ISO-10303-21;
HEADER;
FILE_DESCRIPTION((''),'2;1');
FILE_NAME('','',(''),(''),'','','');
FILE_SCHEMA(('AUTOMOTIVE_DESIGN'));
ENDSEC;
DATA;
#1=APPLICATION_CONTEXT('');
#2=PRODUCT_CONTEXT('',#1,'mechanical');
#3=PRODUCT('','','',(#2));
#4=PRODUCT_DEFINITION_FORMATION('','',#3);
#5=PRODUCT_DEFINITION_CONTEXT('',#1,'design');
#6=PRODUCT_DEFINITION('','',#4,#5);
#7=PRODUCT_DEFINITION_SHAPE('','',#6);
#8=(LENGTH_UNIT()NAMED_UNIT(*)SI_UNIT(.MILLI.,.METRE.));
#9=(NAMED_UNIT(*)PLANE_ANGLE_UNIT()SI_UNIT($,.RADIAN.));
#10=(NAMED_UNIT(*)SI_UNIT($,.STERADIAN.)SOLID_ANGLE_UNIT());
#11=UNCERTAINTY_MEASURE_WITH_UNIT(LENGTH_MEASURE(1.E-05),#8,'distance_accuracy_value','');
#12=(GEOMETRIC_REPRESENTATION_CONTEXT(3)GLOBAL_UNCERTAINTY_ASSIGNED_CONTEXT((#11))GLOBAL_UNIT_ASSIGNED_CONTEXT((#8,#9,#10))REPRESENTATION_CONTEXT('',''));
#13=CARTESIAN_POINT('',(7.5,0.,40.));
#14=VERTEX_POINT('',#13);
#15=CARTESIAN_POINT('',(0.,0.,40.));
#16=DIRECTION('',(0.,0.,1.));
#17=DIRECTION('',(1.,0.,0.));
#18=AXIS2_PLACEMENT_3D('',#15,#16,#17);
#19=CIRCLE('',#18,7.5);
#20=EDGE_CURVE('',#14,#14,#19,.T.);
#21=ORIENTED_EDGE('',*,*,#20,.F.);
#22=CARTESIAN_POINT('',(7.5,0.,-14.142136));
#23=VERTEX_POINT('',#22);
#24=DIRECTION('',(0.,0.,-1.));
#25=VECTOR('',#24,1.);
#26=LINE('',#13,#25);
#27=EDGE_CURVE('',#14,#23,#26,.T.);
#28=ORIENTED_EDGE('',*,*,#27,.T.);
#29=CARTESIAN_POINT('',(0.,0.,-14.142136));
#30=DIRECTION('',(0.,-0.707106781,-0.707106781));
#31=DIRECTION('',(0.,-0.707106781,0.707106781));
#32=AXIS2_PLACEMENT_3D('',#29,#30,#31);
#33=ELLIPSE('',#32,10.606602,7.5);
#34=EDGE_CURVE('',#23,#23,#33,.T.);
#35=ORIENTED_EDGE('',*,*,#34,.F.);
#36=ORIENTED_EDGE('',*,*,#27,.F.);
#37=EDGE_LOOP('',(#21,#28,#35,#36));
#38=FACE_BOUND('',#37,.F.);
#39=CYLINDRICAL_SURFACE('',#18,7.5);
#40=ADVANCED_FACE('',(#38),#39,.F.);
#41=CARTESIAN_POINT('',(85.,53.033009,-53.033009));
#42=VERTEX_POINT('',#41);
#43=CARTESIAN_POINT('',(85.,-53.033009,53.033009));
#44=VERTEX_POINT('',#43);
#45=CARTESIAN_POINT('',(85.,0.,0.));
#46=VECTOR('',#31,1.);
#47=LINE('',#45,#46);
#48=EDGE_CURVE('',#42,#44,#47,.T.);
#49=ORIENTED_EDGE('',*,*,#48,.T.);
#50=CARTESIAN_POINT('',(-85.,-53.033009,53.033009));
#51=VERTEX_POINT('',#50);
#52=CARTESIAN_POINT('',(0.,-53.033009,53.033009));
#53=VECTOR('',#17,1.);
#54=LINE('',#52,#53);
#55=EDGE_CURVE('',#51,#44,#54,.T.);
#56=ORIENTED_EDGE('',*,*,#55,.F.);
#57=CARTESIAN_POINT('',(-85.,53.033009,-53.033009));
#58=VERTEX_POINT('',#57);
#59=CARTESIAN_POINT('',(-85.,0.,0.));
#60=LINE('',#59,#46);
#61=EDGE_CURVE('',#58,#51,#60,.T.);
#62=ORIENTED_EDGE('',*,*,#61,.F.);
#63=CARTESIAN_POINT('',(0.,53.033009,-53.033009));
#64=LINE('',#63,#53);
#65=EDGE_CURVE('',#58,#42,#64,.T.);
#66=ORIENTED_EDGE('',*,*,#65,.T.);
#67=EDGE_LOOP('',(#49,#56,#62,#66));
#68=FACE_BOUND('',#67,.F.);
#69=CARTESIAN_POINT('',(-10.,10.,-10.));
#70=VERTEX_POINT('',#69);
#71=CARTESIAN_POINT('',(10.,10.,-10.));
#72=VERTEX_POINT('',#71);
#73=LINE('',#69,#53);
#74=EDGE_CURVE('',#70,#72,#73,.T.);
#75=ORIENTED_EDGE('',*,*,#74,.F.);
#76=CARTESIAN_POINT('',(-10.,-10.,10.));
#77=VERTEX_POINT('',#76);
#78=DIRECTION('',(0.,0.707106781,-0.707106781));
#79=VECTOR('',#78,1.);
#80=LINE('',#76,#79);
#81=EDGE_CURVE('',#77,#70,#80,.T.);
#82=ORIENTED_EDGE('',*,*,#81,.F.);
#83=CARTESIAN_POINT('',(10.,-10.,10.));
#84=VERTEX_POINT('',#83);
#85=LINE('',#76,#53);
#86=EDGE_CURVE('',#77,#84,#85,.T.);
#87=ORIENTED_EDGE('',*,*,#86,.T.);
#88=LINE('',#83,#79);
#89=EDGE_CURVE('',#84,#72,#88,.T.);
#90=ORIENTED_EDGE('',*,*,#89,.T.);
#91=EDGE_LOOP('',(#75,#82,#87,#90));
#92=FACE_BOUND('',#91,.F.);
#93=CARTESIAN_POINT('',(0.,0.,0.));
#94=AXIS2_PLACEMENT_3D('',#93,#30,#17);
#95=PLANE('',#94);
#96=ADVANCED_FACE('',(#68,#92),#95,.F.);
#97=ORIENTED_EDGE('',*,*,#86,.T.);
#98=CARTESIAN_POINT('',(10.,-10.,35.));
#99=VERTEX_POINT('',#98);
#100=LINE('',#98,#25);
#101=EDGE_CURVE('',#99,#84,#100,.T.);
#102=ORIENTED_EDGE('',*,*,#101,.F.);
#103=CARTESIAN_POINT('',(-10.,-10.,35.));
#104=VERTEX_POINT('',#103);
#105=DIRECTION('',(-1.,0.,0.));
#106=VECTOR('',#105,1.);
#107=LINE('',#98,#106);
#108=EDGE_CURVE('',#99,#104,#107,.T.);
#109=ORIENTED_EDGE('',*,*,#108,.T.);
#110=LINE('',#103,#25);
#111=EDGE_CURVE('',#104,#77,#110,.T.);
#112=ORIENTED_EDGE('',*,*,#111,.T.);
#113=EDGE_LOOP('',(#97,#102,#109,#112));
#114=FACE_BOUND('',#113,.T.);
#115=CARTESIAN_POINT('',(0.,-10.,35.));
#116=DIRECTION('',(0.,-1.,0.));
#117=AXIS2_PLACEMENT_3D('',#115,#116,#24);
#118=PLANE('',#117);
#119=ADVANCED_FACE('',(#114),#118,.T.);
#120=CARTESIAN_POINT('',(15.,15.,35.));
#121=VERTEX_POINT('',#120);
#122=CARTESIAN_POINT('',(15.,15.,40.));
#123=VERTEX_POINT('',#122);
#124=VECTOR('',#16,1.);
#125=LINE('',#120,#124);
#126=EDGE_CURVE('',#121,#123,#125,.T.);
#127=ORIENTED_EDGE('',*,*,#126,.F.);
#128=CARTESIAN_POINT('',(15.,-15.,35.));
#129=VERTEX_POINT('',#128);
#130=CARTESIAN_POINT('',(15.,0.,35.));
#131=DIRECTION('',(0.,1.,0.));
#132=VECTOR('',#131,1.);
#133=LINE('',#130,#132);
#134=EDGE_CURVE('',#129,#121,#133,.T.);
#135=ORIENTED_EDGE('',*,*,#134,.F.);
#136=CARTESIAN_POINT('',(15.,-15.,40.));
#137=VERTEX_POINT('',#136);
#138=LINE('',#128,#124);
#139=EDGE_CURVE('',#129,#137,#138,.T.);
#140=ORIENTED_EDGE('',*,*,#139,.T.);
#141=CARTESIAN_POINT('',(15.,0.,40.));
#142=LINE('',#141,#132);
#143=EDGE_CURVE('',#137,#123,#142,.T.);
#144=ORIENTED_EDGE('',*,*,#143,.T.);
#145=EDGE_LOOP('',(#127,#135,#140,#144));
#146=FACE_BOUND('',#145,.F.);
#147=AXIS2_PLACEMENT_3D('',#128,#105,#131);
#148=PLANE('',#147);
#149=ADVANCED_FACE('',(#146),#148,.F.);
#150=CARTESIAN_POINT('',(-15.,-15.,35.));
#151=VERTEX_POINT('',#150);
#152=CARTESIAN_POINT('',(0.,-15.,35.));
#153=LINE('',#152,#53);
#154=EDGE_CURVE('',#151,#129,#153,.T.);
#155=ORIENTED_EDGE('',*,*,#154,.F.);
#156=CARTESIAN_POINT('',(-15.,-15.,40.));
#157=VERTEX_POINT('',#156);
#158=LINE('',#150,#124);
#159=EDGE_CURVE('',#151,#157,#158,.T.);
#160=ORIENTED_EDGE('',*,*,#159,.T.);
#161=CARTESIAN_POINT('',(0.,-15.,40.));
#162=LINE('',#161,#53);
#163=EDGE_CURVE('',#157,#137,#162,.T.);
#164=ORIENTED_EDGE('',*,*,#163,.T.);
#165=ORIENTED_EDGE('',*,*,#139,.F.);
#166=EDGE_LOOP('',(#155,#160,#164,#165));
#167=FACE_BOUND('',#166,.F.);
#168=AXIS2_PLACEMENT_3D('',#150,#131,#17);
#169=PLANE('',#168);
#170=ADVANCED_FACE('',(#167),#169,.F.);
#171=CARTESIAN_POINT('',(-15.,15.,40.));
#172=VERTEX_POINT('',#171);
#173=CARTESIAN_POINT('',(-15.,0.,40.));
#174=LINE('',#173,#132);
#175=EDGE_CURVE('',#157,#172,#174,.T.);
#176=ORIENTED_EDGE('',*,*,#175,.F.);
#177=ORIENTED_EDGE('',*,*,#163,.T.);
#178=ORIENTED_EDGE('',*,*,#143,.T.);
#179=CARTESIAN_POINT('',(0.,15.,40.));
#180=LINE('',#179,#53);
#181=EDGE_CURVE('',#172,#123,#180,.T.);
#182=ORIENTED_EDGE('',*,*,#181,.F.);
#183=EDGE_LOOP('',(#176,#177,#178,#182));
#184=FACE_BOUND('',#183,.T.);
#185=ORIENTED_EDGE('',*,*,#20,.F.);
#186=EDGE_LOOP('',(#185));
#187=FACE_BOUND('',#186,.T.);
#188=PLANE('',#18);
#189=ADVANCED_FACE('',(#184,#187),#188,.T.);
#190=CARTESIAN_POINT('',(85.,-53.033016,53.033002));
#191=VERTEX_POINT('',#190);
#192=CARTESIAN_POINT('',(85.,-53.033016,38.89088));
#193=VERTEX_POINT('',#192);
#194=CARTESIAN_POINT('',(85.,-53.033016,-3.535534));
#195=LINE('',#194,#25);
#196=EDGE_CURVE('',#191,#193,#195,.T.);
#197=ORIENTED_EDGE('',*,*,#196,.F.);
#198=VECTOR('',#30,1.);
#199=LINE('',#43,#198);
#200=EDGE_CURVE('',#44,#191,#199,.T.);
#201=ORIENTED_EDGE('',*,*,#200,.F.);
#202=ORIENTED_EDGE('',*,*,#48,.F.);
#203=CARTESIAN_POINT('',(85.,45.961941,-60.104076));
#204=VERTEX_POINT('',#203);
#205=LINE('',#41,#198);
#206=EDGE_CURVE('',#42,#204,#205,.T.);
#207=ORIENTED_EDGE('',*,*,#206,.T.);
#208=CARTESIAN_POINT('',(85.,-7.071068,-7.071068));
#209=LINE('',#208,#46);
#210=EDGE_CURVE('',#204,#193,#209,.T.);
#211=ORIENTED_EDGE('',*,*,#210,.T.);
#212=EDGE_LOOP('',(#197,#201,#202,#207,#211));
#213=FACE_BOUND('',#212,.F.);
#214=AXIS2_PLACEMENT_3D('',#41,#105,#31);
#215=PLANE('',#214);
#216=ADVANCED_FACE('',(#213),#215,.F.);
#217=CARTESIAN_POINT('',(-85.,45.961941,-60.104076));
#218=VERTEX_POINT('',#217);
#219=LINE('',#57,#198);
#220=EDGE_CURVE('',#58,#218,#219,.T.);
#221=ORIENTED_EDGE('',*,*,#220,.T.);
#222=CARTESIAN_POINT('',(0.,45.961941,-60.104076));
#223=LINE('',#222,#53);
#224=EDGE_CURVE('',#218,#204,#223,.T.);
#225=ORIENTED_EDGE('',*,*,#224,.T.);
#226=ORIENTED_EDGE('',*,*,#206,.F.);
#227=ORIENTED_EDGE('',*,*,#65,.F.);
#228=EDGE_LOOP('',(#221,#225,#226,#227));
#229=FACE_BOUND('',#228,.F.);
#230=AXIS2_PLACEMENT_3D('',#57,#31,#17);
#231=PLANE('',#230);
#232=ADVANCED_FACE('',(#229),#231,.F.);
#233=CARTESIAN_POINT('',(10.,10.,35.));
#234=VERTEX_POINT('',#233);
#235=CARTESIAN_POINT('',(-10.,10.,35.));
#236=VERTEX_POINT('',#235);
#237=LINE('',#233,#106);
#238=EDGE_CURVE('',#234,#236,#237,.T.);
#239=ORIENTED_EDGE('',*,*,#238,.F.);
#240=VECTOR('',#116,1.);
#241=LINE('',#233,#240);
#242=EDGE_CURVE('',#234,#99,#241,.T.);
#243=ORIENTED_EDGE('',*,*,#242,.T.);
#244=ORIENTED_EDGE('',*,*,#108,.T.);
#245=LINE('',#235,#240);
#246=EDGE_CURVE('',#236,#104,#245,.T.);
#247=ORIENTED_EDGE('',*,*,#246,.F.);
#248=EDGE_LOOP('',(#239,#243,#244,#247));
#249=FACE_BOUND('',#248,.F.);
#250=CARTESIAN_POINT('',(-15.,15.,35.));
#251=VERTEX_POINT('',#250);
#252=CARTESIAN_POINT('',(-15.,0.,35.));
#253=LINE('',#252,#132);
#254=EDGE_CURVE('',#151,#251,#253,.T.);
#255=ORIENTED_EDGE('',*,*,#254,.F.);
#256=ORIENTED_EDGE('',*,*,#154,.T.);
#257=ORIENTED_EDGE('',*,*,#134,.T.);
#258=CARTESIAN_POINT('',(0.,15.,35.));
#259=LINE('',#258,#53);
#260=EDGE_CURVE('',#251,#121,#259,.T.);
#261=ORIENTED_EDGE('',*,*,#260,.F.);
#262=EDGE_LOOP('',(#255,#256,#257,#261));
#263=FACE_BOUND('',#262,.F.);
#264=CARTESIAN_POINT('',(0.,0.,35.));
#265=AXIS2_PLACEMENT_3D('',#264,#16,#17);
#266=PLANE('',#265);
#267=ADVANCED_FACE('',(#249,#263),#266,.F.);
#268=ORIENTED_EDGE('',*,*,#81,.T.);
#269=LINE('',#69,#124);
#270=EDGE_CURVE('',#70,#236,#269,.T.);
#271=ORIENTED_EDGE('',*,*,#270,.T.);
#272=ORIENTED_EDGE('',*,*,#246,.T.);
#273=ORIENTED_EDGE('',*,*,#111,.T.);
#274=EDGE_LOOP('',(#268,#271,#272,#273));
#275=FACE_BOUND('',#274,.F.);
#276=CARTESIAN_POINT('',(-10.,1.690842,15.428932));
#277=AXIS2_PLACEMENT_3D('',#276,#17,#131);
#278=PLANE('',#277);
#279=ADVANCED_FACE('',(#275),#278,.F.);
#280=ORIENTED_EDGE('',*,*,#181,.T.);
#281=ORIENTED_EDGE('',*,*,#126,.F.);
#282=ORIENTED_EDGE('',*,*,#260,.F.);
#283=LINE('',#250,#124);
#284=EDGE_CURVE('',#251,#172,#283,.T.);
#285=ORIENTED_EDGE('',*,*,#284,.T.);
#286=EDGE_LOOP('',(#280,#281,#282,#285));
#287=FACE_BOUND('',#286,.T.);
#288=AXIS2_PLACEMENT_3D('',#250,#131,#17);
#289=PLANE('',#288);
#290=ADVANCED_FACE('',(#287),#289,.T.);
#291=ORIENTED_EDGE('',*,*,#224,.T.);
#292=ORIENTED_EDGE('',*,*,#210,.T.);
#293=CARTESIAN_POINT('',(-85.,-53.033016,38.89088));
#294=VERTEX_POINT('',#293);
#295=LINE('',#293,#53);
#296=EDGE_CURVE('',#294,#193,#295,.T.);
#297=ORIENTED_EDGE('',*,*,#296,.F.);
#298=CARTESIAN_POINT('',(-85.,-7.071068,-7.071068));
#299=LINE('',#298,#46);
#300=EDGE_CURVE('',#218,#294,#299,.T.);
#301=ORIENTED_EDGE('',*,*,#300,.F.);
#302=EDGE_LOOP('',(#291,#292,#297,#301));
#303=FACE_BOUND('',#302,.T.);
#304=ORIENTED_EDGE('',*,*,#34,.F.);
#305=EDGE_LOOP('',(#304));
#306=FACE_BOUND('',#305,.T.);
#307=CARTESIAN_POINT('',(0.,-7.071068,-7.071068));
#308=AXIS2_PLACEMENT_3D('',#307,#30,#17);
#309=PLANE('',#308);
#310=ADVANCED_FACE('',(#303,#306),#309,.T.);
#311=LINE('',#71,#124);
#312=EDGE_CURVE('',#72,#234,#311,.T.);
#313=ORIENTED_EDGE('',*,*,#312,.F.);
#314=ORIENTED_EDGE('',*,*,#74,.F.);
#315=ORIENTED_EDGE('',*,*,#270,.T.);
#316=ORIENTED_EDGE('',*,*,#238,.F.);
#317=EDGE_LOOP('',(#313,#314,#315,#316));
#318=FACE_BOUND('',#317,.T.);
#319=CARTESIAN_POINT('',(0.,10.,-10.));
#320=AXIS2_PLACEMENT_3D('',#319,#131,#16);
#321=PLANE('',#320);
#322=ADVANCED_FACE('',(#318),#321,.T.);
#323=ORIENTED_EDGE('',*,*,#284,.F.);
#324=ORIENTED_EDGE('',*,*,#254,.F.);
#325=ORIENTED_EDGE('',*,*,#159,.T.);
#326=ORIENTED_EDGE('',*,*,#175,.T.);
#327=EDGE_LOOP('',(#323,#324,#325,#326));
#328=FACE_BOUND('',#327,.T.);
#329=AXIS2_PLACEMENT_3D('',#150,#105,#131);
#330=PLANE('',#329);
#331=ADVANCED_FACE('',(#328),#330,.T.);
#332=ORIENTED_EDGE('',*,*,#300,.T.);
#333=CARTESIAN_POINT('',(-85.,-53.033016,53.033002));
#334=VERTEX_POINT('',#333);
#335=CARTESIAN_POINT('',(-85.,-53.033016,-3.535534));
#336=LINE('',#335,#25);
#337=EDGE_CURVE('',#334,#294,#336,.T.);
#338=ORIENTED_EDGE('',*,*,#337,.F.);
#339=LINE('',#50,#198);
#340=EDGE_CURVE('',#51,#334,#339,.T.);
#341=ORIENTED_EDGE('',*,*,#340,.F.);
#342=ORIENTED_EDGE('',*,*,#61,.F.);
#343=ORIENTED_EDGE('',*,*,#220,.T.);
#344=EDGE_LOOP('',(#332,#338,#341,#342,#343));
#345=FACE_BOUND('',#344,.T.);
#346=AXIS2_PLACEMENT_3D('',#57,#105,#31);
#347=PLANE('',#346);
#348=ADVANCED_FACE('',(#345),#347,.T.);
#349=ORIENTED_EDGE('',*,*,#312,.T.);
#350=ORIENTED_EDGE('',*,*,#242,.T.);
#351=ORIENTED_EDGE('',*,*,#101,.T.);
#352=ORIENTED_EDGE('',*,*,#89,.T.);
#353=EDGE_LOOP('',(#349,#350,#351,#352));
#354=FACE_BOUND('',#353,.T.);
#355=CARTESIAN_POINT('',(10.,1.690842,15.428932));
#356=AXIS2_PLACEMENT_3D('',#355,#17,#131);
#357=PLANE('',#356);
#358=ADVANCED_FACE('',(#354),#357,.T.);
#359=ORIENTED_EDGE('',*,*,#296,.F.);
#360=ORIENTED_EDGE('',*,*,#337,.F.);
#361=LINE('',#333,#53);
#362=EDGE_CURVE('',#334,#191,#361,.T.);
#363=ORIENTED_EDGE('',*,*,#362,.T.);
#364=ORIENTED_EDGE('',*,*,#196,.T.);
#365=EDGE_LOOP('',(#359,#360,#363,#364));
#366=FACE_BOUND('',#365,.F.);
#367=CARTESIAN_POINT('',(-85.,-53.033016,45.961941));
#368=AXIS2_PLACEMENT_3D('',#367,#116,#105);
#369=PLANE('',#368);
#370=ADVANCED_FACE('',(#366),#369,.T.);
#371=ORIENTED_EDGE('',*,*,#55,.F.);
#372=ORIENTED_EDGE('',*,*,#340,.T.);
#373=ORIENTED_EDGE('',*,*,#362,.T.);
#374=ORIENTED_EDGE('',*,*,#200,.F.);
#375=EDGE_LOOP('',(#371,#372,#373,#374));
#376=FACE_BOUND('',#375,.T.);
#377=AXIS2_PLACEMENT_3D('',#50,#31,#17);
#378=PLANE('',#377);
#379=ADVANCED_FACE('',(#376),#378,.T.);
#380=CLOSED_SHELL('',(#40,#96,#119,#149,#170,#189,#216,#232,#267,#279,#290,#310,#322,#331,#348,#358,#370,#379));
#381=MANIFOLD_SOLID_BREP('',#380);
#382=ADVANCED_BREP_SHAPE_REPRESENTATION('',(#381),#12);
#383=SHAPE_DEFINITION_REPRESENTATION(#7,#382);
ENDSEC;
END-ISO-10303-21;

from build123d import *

# Parameters (mm, degrees)
F1_W     = 170
F1_H     = 150
F2_DEPTH = 10
F3_SIZE  = 9.99999
F5_DEPTH = 10
F6_W     = 30
F6_H     = 30
F7_DEPTH = 5
F8_R     = 7.5
F9_DEPTH = 100.1050764009


# Not quite as in the source:
# - a fillet or chamfer is up to 0.001 mm smaller than in the source, because OpenCascade refuses the exact size


with BuildPart() as f2:
    # F1 (on face) → F2 (new body)
    with BuildSketch(Plane(origin=(0, 0, 0), x_dir=(1, 0, 0), z_dir=(0, -0.7071067812, -0.7071067812))):
        Rectangle(F1_W, F1_H)
    extrude(amount=F2_DEPTH)

    # F3 (size 10 in the source; OpenCascade refuses exactly that, so slightly less here)
    f3_edges = [f2.edges().sort_by_distance(p)[0] for p in [
        (0, -60.104076, 45.961941),
    ]]
    chamfer(f3_edges, length=F3_SIZE)

    # F4 (on Right) → F5 (join, symmetric)
    with BuildSketch(Plane.YZ):
        Polygon((-10, 35), (-10, 10), (10, -10), (10, 35), align=None)
    extrude(amount=F5_DEPTH, both=True)

    # F6 (on face) → F7 (join)
    with BuildSketch(Plane.XY.offset(35)):
        Rectangle(F6_W, F6_H)
    extrude(amount=F7_DEPTH)

    # F8 (on face) → F9 (cut, through all)
    with BuildSketch(Plane.XY.offset(40)):
        Circle(F8_R)
    extrude(amount=-F9_DEPTH, mode=Mode.SUBTRACT)


solid = f2.part
